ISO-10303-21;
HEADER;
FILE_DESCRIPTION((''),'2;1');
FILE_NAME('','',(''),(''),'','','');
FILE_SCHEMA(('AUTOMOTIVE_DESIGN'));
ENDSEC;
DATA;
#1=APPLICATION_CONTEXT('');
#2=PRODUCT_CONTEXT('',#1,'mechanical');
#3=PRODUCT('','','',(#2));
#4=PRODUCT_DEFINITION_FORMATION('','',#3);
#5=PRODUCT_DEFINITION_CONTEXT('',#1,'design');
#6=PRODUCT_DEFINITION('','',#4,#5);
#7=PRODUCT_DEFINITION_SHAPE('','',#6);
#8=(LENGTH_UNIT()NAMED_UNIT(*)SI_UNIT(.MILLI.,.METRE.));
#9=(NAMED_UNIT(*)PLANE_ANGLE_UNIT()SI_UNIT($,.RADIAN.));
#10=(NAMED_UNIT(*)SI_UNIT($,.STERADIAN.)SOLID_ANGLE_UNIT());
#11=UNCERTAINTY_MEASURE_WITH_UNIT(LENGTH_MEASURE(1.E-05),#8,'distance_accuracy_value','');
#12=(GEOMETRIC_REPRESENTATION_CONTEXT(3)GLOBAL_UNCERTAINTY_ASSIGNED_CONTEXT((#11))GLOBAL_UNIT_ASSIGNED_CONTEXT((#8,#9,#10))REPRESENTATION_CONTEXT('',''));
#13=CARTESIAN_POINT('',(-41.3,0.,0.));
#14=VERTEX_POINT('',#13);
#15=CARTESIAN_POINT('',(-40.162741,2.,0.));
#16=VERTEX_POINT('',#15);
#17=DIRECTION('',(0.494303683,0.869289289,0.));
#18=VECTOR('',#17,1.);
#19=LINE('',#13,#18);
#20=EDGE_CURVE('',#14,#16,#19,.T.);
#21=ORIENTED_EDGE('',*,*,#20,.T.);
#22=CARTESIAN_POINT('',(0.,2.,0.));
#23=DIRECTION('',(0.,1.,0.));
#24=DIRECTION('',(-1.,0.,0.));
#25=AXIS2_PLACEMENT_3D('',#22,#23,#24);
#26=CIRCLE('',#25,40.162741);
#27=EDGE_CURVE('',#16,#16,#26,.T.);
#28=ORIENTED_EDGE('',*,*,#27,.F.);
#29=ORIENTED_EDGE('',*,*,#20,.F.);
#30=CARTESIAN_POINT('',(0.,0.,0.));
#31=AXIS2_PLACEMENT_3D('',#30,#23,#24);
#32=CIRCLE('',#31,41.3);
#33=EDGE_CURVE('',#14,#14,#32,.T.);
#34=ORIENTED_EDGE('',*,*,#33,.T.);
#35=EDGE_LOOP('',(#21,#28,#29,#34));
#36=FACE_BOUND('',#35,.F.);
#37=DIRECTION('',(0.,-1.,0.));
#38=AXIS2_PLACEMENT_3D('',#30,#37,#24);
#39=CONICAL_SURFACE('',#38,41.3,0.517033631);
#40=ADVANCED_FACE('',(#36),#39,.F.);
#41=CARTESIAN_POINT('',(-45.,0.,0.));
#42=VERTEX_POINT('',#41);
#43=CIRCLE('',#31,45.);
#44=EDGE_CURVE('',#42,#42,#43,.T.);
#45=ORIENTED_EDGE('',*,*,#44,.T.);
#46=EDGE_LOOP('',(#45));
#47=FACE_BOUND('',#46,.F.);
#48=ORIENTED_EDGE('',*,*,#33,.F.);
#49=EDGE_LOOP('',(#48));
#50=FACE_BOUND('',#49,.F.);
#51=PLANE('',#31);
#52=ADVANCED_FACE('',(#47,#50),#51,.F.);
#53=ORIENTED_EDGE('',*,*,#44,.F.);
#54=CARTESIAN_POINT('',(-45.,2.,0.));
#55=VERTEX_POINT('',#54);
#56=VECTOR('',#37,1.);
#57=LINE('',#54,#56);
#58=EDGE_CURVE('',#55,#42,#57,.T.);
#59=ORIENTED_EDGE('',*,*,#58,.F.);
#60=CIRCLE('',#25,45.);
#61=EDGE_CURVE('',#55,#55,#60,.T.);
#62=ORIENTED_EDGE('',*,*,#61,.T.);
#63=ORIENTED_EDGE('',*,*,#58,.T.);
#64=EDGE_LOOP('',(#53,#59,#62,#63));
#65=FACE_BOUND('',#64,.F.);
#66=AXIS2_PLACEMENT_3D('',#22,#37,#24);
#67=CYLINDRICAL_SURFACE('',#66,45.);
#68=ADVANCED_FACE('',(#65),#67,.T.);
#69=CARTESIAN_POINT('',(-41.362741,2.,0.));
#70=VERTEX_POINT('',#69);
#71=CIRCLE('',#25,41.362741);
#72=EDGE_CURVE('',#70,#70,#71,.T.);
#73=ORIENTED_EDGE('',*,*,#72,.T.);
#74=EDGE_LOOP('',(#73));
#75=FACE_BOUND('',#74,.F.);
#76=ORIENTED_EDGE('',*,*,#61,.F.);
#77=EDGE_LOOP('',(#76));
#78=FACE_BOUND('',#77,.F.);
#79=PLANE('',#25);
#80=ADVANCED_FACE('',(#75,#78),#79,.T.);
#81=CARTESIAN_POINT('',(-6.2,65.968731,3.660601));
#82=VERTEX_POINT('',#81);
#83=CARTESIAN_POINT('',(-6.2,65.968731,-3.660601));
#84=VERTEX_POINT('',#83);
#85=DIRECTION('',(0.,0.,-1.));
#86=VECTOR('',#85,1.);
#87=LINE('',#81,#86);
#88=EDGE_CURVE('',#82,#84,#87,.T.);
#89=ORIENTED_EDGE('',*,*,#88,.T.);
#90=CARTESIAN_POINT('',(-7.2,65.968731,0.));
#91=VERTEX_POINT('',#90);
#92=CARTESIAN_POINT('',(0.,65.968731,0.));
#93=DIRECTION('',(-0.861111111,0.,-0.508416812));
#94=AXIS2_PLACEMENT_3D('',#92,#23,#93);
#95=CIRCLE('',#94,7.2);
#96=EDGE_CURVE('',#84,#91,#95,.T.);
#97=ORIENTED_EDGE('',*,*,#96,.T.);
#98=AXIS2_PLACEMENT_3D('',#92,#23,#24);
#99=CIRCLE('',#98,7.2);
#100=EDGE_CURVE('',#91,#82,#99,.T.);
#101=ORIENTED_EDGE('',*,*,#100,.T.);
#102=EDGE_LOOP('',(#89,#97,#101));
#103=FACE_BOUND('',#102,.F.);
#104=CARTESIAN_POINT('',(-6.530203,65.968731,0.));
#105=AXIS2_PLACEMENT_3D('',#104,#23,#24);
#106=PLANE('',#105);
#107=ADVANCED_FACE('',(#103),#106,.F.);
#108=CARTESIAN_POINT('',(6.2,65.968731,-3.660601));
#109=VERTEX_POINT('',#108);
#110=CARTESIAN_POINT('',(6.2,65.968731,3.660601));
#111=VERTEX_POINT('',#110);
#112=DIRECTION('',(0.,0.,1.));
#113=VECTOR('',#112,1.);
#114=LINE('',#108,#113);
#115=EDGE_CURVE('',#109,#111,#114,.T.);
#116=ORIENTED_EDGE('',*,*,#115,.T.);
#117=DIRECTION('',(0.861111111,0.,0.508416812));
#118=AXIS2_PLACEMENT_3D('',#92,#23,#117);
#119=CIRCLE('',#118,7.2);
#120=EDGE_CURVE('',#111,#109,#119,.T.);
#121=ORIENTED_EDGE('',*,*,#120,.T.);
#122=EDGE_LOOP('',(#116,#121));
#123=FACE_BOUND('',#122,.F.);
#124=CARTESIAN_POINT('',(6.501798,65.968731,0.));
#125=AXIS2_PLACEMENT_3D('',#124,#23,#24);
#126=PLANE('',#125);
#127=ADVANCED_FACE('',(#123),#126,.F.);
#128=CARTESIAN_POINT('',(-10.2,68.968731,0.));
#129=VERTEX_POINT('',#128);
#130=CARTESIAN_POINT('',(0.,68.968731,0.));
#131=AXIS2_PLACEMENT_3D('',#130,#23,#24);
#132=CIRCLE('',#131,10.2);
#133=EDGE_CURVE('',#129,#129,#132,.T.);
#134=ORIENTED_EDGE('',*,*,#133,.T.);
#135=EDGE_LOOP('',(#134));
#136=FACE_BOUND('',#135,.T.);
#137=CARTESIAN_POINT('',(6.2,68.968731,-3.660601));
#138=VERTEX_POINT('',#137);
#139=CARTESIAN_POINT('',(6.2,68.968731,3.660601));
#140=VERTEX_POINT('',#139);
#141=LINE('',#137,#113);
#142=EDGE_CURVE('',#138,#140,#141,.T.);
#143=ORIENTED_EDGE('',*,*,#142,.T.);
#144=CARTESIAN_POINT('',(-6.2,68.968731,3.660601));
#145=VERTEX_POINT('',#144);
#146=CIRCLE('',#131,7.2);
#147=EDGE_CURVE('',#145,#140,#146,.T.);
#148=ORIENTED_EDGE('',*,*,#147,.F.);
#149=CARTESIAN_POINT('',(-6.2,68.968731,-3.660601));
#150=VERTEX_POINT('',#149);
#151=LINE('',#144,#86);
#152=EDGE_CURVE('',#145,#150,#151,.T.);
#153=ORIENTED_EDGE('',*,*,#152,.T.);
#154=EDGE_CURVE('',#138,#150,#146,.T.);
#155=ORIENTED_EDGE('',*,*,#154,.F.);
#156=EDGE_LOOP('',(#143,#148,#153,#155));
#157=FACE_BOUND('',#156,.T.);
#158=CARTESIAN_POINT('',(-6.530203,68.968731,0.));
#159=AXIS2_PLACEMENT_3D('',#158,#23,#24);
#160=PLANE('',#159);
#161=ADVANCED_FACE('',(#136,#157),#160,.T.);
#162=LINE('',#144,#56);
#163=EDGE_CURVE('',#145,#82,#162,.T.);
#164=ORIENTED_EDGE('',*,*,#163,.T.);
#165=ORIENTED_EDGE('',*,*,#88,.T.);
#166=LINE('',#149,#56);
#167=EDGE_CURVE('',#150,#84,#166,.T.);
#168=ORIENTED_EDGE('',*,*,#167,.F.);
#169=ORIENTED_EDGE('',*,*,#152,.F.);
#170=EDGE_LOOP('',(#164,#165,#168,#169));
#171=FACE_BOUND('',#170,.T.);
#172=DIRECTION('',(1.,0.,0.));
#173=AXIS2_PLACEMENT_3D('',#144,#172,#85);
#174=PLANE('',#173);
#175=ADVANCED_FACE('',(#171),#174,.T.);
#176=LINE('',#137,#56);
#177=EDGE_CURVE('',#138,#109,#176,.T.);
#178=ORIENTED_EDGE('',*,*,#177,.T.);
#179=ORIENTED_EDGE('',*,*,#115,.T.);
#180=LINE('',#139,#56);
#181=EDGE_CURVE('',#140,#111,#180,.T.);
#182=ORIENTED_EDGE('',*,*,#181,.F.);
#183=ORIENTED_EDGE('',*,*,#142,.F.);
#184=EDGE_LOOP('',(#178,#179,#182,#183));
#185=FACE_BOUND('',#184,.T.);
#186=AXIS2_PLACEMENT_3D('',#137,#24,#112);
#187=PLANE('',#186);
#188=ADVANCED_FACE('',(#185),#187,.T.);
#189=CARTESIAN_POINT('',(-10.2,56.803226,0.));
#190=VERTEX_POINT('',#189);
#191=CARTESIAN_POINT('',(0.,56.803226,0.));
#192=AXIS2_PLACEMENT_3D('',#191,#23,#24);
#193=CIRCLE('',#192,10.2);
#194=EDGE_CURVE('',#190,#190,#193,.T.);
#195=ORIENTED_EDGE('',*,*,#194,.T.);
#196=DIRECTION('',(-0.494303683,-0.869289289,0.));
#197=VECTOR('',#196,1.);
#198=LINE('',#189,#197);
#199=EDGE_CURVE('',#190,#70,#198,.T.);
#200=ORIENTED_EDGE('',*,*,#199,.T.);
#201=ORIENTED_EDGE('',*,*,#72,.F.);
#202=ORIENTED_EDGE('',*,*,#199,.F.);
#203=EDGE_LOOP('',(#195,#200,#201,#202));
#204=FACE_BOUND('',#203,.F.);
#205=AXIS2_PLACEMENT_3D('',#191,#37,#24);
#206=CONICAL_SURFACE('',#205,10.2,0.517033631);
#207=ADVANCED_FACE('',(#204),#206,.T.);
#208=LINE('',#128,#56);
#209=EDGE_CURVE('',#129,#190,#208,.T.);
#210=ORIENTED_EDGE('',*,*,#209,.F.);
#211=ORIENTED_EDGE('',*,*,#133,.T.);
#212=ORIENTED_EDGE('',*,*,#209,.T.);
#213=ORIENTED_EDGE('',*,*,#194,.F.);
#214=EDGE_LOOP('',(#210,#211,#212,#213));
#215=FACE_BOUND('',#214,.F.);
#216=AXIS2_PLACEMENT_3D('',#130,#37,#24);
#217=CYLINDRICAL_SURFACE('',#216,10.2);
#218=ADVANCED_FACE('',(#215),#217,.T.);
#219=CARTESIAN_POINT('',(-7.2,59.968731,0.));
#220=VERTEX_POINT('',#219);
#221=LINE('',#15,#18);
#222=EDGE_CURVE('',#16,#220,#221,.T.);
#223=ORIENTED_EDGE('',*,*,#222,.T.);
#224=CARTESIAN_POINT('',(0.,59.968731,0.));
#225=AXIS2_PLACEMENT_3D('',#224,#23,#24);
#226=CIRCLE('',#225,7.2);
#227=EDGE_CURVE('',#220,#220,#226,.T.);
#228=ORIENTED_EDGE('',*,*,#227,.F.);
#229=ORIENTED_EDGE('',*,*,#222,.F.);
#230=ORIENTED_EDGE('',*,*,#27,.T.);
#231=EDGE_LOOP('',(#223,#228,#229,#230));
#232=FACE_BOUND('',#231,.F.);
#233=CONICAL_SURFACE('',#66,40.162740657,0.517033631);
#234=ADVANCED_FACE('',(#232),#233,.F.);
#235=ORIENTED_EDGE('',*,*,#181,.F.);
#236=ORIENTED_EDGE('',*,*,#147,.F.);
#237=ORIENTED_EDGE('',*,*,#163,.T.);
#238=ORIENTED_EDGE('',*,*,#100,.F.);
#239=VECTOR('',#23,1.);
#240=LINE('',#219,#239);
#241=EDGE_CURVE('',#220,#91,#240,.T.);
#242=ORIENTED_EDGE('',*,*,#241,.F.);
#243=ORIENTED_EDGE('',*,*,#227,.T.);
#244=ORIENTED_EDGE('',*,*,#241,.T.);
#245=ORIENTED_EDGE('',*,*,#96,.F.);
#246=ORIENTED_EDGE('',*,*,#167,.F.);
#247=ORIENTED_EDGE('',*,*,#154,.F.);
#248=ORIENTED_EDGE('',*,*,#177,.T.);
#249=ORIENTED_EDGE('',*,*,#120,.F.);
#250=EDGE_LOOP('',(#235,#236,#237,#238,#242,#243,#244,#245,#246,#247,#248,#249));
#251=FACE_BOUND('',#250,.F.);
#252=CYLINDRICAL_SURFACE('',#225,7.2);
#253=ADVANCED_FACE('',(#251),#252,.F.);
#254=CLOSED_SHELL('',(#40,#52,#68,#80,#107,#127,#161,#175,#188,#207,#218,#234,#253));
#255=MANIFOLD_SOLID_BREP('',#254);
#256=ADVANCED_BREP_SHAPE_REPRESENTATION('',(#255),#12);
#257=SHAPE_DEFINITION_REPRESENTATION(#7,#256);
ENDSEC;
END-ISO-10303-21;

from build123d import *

# Parameters (mm, degrees)
F4_DEPTH = 3


with BuildPart() as f1:
    # F0 (on Top) → F1 (revolve)
    with BuildSketch(Plane.XY):
        Polygon((-41.3627406567, 2), (-40.1627406567, 2), (-7.2, 59.9687313223), (-8.4, 59.9687313223), (-10.2, 56.8032264431), align=None)
        Polygon((-10.2, 56.8032264431), (-8.4, 59.9687313223), (-10.2, 59.9687313223), align=None)
        Polygon((-8.4, 59.9687313223), (-7.2, 59.9687313223), (-7.2, 68.9687313223), (-10.2, 68.9687313223), (-10.2, 59.9687313223), align=None)
        Polygon((-42.5, 0), (-41.3, 0), (-40.1627406567, 2), (-41.3627406567, 2), align=None)
        Polygon((-45, 0), (-42.5, 0), (-41.3627406567, 2), (-45, 2), align=None)
    revolve(axis=Axis((0, 36.8, 0), (0, 1, 0)))

    # F3 (on offset) → F4 (join)
    with BuildSketch(Plane(origin=(0, 68.9687313223, 0), x_dir=(-1, 0, 0), z_dir=(0, 1, 0))):
        with BuildLine():
            ThreePointArc((6.2, -3.6606010435), (6.9455021417, -1.8973665961), (7.2, 0))
            ThreePointArc((7.2, 0), (6.9455021417, 1.8973665961), (6.2, 3.6606010435))
            Line((6.2, 3.6606010435), (6.2, 0))
            Line((6.2, 0), (6.2, -3.6606010435))
        make_face()
        with BuildLine():
            Line((-6.2, -3.6606010435), (-6.2, 3.6606010435))
            ThreePointArc((-6.2, 3.6606010435), (-7.2, 0), (-6.2, -3.6606010435))
        make_face()
    extrude(amount=-F4_DEPTH)


solid = f1.part
